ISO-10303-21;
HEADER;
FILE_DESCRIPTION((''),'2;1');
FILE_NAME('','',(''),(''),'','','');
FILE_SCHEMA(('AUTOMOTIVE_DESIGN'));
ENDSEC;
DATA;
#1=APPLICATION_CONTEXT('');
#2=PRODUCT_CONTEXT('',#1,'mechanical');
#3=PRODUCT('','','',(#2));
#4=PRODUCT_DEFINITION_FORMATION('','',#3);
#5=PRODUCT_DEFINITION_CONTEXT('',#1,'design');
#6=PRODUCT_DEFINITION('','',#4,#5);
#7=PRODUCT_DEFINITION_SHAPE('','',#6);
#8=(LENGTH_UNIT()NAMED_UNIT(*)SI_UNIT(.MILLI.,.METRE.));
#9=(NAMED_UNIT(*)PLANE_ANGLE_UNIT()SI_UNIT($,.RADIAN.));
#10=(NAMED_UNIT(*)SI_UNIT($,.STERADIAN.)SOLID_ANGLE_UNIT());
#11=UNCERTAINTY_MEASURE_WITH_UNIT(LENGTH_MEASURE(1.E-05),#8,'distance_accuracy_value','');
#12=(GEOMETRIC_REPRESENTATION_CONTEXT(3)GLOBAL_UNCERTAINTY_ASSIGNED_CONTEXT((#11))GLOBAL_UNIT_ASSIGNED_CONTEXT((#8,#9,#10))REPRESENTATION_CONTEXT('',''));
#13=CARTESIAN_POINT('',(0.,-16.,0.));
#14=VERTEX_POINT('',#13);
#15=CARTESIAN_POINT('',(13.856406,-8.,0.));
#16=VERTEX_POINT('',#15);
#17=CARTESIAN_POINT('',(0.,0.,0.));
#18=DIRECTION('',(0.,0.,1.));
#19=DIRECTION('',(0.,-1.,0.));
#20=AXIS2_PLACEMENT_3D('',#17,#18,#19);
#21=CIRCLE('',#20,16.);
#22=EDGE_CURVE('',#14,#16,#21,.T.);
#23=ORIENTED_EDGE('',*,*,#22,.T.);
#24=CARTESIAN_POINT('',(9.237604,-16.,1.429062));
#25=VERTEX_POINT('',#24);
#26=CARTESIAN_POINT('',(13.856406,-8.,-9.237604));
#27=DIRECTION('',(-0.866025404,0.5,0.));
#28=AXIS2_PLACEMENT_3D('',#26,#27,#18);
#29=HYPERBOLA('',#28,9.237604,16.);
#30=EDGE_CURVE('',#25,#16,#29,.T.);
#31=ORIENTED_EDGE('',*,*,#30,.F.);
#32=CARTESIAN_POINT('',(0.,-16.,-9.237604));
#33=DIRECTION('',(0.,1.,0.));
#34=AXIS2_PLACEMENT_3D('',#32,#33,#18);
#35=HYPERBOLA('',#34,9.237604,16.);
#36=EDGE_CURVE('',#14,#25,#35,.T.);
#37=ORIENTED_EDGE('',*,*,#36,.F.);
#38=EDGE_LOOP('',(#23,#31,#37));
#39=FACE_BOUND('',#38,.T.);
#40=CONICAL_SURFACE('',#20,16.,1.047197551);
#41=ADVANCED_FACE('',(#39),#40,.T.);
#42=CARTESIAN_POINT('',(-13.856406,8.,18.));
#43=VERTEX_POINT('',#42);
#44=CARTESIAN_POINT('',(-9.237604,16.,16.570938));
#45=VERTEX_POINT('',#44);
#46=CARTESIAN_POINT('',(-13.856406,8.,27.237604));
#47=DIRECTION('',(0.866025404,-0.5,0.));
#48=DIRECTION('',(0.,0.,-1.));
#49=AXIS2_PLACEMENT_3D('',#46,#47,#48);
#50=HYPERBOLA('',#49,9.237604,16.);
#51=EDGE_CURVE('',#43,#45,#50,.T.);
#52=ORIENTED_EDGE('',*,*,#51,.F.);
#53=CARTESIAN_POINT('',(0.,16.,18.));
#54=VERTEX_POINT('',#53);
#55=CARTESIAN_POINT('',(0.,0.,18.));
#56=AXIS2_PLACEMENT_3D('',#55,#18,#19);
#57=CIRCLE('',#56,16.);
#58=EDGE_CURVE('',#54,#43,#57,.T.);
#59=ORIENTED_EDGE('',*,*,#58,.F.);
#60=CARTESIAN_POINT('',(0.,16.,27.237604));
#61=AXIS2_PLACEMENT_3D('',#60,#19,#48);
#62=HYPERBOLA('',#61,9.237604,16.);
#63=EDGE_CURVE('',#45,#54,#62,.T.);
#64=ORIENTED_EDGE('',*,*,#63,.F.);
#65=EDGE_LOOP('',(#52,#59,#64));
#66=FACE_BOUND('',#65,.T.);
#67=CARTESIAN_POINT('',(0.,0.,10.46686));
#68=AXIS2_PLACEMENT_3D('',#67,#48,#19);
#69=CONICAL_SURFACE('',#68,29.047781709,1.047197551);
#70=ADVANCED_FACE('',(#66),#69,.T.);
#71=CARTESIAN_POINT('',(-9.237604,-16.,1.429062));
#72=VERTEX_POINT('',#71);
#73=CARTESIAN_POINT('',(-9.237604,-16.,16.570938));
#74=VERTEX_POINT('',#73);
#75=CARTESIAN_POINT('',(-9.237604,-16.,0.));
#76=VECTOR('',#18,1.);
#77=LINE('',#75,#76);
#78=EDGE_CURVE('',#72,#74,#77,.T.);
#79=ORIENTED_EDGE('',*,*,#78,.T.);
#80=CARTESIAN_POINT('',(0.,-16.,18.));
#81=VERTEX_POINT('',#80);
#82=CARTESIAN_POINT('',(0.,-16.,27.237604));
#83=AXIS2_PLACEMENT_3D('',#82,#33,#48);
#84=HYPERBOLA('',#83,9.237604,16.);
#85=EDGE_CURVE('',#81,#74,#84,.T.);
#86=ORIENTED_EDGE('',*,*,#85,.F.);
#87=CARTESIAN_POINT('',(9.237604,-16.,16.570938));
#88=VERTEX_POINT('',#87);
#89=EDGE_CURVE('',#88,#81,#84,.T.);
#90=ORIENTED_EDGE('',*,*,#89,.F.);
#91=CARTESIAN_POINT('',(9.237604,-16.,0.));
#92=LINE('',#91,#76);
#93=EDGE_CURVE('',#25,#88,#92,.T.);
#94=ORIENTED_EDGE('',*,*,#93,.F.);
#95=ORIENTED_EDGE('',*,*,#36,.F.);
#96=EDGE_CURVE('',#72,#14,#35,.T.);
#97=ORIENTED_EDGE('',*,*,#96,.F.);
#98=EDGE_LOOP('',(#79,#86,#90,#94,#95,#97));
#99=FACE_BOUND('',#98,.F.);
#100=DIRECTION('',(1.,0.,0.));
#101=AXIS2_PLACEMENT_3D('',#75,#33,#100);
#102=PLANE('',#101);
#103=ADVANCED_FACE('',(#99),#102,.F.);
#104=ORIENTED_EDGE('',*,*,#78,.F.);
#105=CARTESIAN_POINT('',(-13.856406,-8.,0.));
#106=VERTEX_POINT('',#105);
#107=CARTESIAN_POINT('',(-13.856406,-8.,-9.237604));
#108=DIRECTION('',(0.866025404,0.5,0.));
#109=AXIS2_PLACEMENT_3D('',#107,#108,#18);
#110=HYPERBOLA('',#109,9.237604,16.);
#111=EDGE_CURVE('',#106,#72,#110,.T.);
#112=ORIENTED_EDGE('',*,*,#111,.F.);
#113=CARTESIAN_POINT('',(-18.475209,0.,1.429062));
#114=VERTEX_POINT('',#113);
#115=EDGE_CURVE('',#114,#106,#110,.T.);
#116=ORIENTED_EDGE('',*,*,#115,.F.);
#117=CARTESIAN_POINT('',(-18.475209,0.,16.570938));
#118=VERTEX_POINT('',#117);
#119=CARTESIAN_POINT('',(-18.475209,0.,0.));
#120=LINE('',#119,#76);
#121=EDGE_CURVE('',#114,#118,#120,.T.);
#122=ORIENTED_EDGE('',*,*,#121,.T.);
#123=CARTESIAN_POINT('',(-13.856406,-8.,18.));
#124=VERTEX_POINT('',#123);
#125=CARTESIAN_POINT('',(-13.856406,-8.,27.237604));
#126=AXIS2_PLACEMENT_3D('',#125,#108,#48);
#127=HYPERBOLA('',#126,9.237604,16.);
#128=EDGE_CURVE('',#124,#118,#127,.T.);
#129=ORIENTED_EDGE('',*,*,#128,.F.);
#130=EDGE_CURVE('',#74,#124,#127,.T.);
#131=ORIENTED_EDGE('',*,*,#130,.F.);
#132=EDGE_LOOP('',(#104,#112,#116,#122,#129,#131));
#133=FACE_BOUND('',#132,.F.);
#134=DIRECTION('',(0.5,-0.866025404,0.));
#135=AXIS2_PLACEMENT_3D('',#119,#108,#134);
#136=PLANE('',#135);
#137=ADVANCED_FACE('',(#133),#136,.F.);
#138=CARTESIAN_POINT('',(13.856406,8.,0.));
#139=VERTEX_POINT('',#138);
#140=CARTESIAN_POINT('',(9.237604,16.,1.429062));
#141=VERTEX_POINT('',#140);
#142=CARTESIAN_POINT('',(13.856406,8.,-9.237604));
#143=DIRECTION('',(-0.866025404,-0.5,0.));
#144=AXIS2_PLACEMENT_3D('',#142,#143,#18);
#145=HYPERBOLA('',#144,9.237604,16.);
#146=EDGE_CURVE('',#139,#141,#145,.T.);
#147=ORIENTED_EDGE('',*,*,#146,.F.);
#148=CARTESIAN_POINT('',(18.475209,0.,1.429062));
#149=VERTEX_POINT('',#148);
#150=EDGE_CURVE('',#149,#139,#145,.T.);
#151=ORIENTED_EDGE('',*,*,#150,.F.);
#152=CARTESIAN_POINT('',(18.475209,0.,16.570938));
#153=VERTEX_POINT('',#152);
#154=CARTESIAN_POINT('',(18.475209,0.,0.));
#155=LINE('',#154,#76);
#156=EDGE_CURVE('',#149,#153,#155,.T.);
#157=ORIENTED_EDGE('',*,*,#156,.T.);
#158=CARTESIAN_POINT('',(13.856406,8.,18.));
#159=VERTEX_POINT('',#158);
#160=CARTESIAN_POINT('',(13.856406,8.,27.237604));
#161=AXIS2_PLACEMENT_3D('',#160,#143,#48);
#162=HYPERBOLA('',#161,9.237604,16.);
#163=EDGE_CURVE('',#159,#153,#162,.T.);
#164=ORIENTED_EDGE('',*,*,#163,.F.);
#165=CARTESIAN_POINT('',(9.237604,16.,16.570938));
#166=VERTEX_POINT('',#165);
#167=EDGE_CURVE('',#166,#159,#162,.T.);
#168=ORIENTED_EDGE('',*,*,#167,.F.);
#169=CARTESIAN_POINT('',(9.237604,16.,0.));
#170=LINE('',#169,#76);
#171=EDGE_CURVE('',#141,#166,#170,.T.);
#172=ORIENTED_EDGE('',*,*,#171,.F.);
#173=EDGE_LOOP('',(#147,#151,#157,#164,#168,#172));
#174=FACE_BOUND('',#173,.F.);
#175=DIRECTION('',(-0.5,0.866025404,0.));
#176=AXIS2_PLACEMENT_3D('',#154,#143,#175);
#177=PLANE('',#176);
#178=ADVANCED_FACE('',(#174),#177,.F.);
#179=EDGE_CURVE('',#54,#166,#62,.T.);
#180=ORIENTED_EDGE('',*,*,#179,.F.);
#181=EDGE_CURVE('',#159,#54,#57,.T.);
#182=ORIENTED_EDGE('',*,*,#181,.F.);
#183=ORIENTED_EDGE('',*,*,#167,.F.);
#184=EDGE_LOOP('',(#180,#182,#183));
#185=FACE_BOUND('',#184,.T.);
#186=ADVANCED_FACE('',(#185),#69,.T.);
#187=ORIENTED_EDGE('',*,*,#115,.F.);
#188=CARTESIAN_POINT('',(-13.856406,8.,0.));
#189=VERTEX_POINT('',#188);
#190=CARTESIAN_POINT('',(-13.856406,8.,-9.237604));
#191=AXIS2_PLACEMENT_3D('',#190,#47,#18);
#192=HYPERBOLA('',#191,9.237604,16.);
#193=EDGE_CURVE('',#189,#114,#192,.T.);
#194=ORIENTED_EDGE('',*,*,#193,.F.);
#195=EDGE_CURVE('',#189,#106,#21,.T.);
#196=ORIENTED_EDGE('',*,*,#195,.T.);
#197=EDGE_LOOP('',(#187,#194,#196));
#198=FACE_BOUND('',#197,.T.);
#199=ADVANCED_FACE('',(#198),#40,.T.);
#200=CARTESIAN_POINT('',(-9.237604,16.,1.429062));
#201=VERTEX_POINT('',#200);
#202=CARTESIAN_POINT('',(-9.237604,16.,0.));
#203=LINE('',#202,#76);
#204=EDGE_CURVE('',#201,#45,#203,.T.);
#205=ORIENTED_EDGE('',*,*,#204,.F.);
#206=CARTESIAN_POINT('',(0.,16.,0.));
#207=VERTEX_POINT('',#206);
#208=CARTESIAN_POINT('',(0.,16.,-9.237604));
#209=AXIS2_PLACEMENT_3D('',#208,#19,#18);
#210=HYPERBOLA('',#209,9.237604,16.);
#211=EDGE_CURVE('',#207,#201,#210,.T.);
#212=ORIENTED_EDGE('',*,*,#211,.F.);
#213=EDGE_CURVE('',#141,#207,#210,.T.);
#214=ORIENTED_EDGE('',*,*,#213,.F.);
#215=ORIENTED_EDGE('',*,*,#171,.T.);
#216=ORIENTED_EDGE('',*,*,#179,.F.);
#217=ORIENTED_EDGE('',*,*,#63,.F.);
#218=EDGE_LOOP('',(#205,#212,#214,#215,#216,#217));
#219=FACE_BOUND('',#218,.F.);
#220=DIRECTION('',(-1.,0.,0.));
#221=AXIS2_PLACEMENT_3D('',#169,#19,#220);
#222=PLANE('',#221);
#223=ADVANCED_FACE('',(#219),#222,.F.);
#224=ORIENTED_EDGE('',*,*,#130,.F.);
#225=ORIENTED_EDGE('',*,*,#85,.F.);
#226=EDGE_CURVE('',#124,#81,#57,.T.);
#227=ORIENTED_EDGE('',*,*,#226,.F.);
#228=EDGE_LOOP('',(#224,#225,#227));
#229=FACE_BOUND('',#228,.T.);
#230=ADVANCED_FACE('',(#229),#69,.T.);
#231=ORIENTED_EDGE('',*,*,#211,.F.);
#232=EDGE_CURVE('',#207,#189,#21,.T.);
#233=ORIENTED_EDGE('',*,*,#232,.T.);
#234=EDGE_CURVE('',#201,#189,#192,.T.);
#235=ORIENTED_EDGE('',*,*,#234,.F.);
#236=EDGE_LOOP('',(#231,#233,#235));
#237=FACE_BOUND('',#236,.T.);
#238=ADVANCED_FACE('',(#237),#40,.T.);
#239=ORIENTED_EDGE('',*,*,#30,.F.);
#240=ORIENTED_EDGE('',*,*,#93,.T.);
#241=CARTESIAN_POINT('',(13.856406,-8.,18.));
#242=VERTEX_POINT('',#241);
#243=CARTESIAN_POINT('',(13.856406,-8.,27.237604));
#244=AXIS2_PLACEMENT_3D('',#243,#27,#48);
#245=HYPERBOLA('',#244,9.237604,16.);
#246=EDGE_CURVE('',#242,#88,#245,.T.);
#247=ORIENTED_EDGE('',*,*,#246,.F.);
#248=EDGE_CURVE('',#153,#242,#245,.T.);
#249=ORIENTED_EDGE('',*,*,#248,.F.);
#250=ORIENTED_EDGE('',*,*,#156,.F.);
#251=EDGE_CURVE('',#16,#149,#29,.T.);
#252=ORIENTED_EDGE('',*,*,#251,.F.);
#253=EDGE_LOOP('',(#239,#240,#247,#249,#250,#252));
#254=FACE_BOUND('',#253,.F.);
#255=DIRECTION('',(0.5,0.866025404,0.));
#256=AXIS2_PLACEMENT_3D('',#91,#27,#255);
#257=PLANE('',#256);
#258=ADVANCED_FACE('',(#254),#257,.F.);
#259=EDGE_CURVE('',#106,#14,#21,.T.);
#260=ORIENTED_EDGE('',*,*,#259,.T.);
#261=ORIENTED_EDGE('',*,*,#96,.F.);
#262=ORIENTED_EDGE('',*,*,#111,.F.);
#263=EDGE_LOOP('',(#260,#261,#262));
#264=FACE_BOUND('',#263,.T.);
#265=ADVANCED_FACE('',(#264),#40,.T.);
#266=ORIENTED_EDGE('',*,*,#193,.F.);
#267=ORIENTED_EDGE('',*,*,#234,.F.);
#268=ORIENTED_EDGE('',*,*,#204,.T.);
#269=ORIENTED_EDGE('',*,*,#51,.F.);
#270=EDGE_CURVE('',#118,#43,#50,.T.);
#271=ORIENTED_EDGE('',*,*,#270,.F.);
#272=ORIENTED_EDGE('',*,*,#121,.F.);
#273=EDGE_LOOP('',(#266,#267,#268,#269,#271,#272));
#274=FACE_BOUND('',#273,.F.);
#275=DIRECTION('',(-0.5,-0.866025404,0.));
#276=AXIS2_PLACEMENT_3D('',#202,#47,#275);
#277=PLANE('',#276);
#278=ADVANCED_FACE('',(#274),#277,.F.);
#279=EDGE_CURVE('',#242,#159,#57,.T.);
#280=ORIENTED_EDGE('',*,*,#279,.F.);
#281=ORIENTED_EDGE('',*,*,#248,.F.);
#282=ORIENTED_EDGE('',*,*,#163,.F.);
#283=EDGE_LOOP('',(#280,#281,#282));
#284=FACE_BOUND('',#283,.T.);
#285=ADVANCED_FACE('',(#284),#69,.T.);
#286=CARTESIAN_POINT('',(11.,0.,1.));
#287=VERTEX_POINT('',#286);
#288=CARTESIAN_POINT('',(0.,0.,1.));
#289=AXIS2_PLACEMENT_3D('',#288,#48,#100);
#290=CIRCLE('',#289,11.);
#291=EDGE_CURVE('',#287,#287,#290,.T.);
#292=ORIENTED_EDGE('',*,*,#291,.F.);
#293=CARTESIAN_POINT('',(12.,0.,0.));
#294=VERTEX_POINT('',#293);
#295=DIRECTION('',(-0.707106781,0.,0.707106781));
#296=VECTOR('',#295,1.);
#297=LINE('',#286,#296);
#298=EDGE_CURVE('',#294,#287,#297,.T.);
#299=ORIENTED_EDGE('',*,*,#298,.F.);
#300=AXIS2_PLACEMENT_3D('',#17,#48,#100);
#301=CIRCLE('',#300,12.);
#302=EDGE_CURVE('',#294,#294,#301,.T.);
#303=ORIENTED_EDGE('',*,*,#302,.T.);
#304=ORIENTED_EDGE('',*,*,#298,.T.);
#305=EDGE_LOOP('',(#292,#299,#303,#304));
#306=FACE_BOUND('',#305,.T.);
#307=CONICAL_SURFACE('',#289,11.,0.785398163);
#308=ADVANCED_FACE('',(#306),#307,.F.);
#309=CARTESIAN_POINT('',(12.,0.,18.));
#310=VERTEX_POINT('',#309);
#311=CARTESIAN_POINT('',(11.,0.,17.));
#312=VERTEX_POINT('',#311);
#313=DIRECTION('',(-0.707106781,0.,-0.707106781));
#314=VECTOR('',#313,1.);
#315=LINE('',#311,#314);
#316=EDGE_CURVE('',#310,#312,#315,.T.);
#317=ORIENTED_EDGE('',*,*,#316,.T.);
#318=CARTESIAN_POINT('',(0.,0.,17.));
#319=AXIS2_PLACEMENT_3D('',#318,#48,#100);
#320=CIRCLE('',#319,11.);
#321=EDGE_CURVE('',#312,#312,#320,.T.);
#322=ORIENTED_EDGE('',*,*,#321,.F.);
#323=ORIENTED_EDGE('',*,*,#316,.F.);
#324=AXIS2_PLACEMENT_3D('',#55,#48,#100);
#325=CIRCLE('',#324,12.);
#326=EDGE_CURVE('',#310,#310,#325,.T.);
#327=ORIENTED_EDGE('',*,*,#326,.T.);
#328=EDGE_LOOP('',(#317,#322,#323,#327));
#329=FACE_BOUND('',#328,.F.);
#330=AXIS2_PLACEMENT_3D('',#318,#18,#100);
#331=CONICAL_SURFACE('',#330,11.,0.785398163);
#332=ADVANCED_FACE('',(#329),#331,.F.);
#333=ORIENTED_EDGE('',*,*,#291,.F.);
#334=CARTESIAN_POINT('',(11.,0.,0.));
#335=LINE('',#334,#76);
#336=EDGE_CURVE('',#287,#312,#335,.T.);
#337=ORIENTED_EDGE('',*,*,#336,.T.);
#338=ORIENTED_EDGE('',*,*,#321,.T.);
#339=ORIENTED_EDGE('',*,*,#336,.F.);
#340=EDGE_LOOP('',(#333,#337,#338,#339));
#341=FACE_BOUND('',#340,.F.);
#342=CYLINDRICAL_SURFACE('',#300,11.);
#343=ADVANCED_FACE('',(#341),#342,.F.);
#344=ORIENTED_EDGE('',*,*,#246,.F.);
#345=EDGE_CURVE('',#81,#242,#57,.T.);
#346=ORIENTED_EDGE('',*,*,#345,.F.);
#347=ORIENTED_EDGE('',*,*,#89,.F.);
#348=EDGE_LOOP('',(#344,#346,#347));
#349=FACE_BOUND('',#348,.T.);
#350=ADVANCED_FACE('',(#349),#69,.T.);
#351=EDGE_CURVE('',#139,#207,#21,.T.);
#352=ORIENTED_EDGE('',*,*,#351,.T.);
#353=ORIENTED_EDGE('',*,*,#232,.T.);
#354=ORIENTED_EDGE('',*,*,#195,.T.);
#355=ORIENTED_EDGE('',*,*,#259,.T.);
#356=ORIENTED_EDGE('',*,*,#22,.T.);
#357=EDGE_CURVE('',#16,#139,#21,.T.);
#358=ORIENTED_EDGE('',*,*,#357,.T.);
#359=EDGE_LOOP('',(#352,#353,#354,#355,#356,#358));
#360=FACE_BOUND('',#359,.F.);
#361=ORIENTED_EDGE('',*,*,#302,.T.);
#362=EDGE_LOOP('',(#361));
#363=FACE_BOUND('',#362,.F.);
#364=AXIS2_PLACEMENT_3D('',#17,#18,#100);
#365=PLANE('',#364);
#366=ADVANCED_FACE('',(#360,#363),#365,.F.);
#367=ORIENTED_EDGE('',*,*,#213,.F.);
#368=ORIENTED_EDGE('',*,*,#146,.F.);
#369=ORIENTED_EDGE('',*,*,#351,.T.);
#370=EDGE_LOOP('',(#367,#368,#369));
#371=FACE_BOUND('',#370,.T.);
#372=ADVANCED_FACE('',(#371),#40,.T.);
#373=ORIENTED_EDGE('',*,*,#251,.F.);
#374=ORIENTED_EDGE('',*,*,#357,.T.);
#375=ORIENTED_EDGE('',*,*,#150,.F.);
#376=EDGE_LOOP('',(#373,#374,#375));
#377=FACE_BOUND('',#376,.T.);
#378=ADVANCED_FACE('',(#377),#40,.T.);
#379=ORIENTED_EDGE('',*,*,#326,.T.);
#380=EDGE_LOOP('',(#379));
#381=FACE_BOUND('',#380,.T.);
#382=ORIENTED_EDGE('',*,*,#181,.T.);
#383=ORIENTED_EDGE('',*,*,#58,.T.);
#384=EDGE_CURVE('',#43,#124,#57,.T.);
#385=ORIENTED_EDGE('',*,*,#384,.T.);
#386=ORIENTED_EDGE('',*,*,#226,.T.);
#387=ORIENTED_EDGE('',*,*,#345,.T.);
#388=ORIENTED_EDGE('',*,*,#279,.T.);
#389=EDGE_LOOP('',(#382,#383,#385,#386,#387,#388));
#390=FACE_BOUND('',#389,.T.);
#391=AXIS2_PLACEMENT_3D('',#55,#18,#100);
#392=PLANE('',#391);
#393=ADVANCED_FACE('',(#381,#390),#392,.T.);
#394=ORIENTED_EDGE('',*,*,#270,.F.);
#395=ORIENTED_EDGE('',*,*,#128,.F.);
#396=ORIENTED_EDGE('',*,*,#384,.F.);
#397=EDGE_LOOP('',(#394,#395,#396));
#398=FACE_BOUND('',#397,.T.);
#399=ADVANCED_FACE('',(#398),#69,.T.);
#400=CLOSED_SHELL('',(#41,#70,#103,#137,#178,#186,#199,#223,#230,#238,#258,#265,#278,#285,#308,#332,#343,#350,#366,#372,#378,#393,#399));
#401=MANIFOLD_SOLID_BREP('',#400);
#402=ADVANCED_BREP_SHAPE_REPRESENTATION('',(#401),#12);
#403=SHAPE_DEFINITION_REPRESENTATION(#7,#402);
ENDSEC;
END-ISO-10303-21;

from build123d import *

# Parameters (mm, degrees)
F1_DEPTH = 18
F4_R     = 11
F5_DEPTH = 18.001
F6_SIZE  = 1


# Not quite as in the source:
# - a feature names something its author has since deleted; it is built from what else it names


with BuildPart() as f1:
    # F0 (on Top) → F1 (new body)
    with BuildSketch(Plane.XY):
        Polygon((18.4752086141, 0), (9.237604307, 16), (-9.237604307, 16), (-18.4752086141, 0), (-9.237604307, -16), (9.237604307, -16), align=None)
    extrude(amount=F1_DEPTH)

    # F2 (on Right) → F3 (revolve, cut)
    with BuildSketch(Plane.YZ):
        Polygon((-29.0477817086, 10.4668597182), (-16, 18), (-29.0477817086, 18), align=None)
        Polygon((-16, 0), (-29.0477817086, 7.5331402818), (-29.0477817086, 0), align=None)
    revolve(axis=Axis((0, 0, 10.077371262), (0, 0, 1)), mode=Mode.SUBTRACT)

    # F4 (on face) → F5 (cut, through all)
    with BuildSketch(Plane(origin=(0, 0, 0), x_dir=(1, 0, 0), z_dir=(0, 0, -1))):
        Circle(F4_R)
    extrude(amount=-F5_DEPTH, mode=Mode.SUBTRACT)

    # F6
    f6_edges = [f1.edges().sort_by_distance(p)[0] for p in [
        (-11, 0, 0),
        (-11, 0, 18),
    ]]
    chamfer(f6_edges, length=F6_SIZE)


solid = f1.part
